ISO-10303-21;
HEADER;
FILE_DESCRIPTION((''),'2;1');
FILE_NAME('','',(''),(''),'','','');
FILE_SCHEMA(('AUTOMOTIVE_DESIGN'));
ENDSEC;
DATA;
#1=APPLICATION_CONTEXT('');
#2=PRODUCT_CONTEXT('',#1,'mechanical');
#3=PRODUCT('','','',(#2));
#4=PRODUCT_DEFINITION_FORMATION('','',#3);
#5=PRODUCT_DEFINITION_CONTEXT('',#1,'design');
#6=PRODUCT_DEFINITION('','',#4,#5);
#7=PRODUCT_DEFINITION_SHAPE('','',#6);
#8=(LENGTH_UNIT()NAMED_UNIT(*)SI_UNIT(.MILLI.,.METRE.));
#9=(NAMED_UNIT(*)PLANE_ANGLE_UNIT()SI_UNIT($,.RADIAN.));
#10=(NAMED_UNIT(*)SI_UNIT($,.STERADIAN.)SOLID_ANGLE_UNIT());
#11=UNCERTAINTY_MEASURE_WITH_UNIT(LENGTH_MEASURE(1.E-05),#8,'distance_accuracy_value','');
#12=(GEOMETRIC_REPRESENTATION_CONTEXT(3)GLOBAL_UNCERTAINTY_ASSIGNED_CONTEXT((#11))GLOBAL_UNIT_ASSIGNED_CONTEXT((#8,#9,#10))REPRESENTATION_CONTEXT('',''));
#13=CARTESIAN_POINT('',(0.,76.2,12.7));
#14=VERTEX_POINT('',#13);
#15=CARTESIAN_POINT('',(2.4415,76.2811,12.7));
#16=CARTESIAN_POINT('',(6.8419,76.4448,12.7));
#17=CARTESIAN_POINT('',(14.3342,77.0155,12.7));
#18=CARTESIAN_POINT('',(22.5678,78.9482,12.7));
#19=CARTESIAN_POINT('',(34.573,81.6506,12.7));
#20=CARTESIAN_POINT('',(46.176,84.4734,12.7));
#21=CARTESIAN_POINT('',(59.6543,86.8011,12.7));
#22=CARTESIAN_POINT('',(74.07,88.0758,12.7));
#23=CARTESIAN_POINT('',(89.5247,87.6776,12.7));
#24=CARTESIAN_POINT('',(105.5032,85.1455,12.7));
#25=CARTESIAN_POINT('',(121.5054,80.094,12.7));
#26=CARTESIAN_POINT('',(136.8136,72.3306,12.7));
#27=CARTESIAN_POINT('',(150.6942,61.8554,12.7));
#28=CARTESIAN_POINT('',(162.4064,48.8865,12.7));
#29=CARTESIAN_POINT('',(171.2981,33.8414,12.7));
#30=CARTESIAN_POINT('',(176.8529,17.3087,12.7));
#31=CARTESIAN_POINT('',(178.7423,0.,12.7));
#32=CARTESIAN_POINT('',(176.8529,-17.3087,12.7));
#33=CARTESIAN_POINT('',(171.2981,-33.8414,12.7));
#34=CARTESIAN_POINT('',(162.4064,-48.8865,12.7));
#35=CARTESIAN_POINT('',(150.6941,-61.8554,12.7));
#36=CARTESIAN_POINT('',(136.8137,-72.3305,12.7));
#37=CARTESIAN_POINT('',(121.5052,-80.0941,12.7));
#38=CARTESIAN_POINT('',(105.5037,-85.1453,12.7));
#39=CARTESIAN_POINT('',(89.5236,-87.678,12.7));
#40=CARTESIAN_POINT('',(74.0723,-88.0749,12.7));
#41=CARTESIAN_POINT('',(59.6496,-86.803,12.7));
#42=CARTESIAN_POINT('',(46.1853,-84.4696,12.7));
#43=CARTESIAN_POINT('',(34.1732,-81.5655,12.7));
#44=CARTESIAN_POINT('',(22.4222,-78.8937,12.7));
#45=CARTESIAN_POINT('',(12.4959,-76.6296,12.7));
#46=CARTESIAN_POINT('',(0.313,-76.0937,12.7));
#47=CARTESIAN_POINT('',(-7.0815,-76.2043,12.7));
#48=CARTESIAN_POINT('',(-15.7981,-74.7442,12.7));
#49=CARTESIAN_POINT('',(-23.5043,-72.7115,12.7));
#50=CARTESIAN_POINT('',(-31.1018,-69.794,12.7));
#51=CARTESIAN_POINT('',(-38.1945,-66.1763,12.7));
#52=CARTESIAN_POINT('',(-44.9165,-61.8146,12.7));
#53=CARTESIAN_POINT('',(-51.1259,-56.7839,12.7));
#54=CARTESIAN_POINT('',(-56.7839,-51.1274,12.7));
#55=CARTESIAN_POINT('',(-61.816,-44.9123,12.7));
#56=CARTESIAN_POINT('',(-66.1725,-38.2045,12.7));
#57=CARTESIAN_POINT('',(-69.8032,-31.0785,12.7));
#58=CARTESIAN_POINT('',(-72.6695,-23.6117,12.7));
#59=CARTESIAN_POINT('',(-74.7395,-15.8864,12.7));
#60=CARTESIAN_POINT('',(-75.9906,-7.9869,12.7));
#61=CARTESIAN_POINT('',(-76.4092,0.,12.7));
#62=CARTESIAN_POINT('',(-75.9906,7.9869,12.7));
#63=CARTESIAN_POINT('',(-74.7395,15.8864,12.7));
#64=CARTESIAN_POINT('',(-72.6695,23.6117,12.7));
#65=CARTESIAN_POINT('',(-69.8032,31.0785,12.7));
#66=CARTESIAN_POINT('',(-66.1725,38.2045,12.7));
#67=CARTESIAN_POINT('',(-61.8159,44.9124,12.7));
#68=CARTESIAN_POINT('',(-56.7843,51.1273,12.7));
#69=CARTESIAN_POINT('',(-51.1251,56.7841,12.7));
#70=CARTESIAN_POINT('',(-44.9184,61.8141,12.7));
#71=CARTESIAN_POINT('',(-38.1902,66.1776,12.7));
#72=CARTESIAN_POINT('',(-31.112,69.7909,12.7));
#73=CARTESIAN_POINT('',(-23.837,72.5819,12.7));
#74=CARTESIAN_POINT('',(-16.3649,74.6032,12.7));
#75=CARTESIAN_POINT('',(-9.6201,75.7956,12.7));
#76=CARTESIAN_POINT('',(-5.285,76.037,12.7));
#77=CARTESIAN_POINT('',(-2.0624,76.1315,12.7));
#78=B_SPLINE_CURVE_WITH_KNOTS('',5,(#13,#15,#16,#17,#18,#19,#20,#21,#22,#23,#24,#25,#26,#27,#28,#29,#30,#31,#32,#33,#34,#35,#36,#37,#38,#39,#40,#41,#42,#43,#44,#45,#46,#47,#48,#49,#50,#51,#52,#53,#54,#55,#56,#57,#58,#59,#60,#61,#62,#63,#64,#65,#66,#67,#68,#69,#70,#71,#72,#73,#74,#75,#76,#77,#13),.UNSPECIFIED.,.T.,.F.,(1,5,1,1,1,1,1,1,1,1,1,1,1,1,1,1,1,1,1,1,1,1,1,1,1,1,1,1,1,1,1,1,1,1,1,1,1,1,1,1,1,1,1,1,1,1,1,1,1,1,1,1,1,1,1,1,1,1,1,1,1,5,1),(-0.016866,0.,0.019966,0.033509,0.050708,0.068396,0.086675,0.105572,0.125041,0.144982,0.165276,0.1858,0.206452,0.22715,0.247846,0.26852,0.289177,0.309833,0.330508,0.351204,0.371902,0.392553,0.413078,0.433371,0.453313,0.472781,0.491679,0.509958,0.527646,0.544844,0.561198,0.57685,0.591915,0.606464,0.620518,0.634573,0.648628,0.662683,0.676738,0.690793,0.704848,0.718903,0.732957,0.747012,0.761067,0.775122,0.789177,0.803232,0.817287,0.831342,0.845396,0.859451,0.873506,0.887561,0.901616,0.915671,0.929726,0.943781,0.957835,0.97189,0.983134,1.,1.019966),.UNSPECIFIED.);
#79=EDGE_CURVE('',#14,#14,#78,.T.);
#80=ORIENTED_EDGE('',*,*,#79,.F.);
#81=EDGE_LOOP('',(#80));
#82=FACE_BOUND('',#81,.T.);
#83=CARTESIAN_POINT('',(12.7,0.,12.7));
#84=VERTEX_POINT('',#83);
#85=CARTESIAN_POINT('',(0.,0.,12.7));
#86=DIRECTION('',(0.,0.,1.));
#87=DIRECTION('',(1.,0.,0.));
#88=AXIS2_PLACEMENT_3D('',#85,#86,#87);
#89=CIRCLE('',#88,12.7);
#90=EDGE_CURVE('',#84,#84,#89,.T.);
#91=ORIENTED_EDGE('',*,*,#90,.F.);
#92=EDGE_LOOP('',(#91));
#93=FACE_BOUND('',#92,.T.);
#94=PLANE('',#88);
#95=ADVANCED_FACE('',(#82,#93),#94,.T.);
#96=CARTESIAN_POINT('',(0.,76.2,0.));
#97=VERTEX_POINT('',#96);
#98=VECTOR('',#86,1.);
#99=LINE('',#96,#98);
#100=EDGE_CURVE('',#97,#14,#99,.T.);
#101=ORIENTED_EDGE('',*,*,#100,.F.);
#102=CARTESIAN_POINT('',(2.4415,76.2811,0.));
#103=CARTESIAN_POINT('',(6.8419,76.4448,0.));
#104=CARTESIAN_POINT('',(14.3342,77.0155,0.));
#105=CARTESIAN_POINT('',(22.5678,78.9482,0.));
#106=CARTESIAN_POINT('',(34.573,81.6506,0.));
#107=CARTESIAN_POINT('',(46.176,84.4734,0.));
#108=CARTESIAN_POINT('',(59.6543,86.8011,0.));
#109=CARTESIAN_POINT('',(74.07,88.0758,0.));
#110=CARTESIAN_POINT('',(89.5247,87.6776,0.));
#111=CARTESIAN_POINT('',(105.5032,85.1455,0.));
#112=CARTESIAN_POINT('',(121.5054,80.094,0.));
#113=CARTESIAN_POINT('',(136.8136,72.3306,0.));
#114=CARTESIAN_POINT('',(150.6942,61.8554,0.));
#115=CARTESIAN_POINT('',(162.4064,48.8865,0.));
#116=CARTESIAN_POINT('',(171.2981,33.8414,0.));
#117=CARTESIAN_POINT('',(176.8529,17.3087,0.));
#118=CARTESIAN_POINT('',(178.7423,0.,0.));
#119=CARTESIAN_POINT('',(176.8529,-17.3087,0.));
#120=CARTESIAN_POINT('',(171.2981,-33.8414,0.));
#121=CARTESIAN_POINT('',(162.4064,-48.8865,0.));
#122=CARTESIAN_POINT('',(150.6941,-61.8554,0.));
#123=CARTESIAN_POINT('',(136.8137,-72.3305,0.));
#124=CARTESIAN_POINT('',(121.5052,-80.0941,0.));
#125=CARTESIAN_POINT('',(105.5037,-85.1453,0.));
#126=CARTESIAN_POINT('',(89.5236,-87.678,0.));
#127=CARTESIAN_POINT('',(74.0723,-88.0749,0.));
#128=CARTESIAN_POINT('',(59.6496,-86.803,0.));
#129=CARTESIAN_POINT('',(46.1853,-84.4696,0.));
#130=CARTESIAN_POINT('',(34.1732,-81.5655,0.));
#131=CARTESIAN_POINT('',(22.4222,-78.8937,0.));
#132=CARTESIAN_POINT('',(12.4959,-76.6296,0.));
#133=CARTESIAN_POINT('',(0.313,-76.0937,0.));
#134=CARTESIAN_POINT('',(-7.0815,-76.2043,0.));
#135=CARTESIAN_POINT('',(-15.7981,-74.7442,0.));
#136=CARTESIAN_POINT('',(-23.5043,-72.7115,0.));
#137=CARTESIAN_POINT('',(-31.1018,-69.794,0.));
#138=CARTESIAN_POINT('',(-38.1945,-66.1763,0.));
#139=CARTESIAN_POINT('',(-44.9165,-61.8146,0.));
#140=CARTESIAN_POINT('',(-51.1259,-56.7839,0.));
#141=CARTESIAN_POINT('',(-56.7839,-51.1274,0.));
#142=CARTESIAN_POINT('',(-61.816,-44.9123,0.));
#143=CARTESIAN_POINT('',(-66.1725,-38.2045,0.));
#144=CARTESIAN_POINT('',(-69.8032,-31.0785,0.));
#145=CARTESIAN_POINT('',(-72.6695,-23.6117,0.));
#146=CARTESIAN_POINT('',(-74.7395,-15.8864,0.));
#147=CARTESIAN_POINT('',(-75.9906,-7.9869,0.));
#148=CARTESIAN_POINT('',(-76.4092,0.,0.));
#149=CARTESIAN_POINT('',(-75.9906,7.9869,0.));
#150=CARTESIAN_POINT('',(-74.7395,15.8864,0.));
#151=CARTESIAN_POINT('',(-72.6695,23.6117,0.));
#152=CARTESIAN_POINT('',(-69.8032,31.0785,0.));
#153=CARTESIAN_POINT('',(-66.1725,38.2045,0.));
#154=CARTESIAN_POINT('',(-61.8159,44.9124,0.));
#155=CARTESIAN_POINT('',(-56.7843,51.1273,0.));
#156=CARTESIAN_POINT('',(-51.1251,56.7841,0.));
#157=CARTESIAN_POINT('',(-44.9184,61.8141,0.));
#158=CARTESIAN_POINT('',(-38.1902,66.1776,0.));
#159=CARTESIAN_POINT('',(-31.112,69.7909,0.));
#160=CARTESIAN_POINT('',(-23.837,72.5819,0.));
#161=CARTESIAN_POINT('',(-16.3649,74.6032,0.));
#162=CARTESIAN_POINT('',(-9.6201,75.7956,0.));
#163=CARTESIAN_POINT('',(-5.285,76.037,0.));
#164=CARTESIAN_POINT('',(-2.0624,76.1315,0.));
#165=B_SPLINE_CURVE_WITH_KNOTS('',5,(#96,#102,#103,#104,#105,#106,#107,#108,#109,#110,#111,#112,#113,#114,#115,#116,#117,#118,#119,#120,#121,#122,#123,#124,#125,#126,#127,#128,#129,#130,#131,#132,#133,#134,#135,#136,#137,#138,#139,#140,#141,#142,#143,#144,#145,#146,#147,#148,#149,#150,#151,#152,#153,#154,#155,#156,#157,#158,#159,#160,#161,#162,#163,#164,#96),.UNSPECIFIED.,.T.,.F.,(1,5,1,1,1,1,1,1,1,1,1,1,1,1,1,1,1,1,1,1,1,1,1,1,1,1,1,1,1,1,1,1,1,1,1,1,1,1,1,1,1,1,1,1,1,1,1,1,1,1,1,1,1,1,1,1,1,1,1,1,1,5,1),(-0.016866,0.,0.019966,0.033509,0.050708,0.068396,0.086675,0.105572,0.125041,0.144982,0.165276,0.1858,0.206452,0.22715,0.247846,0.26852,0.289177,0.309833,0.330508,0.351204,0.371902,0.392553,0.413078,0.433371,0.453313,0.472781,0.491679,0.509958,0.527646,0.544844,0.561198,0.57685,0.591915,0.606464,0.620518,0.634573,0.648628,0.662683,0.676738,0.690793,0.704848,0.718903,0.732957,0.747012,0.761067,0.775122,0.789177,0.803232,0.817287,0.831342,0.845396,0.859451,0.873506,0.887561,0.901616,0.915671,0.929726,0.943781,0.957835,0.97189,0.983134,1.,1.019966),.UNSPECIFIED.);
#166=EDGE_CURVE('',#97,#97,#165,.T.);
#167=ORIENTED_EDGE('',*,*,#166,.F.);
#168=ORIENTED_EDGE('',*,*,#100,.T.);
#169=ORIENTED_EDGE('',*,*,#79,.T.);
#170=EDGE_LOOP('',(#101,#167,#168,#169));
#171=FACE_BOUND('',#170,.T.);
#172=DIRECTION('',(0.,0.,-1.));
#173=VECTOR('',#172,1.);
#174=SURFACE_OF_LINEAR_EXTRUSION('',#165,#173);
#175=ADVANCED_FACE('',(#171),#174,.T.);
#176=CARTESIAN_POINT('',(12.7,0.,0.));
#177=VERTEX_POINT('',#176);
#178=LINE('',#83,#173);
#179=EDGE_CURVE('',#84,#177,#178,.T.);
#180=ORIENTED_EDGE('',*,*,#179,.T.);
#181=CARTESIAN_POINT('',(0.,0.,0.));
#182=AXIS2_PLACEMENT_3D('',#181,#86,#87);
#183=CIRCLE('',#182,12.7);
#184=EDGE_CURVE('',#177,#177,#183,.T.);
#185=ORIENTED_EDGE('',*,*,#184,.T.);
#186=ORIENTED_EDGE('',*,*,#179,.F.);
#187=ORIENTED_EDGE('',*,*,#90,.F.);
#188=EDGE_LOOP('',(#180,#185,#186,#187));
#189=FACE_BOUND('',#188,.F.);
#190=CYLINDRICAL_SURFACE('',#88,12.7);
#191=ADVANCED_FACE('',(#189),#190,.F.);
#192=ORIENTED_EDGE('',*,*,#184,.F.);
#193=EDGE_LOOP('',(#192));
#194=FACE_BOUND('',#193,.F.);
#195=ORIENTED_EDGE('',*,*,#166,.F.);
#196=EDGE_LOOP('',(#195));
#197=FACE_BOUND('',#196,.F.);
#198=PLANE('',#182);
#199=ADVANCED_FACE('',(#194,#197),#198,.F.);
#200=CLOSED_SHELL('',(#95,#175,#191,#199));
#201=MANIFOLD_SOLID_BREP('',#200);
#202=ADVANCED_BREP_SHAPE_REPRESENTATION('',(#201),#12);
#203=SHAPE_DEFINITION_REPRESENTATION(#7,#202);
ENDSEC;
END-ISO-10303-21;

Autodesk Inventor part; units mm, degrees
ref_plane "YZ Plane" through (0, 0, 0) normal (1, 0, 0) x (0, 1, 0)
ref_plane "XZ Plane" through (0, 0, 0) normal (0, 1, 0) x (-1, 0, 0)
ref_plane "XY Plane" through (0, 0, 0) normal (0, 0, 1) x (1, 0, 0)
sketch "Main Sketch" plane through (0, 0, 0) normal (0, 0, 1) x (1, 0, 0)
  spline S0 degree 5 poles (0, 76.2) (2.4415, 76.2811) (6.8419, 76.4448) (14.3342, 77.0155) (22.5678, 78.9482) (34.573, 81.6506) (46.176, 84.4734) (59.6543, 86.8011) (74.07, 88.0758) (89.5247, 87.6776) (105.5032, 85.1455) (121.5054, 80.094) (136.8136, 72.3306) (150.6942, 61.8554) (162.4064, 48.8865) (171.2981, 33.8414) (176.8529, 17.3087) (178.7423, 0) (176.8529, -17.3087) (171.2981, -33.8414) (162.4064, -48.8865) (150.6941, -61.8554) (136.8137, -72.3305) (121.5052, -80.0941) (105.5037, -85.1453) (89.5236, -87.678) (74.0723, -88.0749) (59.6496, -86.803) (46.1853, -84.4696) (34.1732, -81.5655) (22.4222, -78.8937) (12.4959, -76.6296) (0.313, -76.0937) (-7.0815, -76.2043) (-15.7981, -74.7442) (-23.5043, -72.7115) (-31.1018, -69.794) (-38.1945, -66.1763) (-44.9165, -61.8146) (-51.1259, -56.7839) (-56.7839, -51.1274) (-61.816, -44.9123) (-66.1725, -38.2045) (-69.8032, -31.0785) (-72.6695, -23.6117) (-74.7395, -15.8864) (-75.9906, -7.9869) (-76.4092, 0) (-75.9906, 7.9869) (-74.7395, 15.8864) (-72.6695, 23.6117) (-69.8032, 31.0785) (-66.1725, 38.2045) (-61.8159, 44.9124) (-56.7843, 51.1273) (-51.1251, 56.7841) (-44.9184, 61.8141) (-38.1902, 66.1776) (-31.112, 69.7909) (-23.837, 72.5819) (-16.3649, 74.6032) (-9.6201, 75.7956) (-5.285, 76.037) (-2.0624, 76.1315) (0, 76.2) knots 0 0 0 0 0 0 0.019966 0.033509 0.050708 0.068396 0.086675 0.105572 0.125041 0.144982 0.165276 0.1858 0.206452 0.22715 0.247846 0.26852 0.289177 0.309833 0.330508 0.351204 0.371902 0.392553 0.413078 0.433371 0.453313 0.472781 0.491679 0.509958 0.527646 0.544844 0.561198 0.57685 0.591915 0.606464 0.620518 0.634573 0.648628 0.662683 0.676738 0.690793 0.704848 0.718903 0.732957 0.747012 0.761067 0.775122 0.789177 0.803232 0.817287 0.831342 0.845396 0.859451 0.873506 0.887561 0.901616 0.915671 0.929726 0.943781 0.957835 0.97189 0.983134 1 1 1 1 1 1
  point P0 (22.0134, 78.8258)
  point P1 (33.3701, 81.4116)
  point P2 (45.5354, 84.1258)
  point P3 (58.8273, 86.3979)
  point P4 (73.3136, 87.6269)
  point P5 (88.8039, 87.2207)
  point P6 (104.8783, 84.6627)
  point P7 (120.9362, 79.576)
  point P8 (136.2611, 71.7733)
  point P9 (150.0945, 61.2842)
  point P10 (161.7111, 48.3549)
  point P11 (170.4865, 33.4236)
  point P12 (175.947, 17.0772)
  point P13 (177.8, 0)
  point P14 (175.947, -17.0772)
  point P15 (170.4865, -33.4236)
  point P16 (161.7111, -48.3549)
  point P17 (150.0945, -61.2842)
  point P18 (136.2611, -71.7733)
  point P19 (120.9362, -79.576)
  point P20 (104.8783, -84.6627)
  point P21 (88.8039, -87.2207)
  point P22 (73.3136, -87.6269)
  point P23 (58.8273, -86.3979)
  point P24 (45.5354, -84.1258)
  point P25 (33.3701, -81.4116)
  point P26 (22.0134, -78.8258)
  point P27 (11.002, -76.9174)
  point P28 (0, -76.2)
  point P29 (-7.9651, -75.7826)
  point P30 (-15.8429, -74.5348)
  point P31 (-23.5471, -72.4705)
  point P32 (-30.9933, -69.6122)
  point P33 (-38.1, -65.9911)
  point P34 (-44.7892, -61.6471)
  point P35 (-50.9878, -56.6276)
  point P36 (-56.6276, -50.9878)
  point P37 (-61.6471, -44.7892)
  point P38 (-65.9911, -38.1)
  point P39 (-69.6122, -30.9933)
  point P40 (-72.4705, -23.5471)
  point P41 (-74.5348, -15.8429)
  point P42 (-75.7826, -7.9651)
  point P43 (-76.2, 0)
  point P44 (-75.7826, 7.9651)
  point P45 (-74.5348, 15.8429)
  point P46 (-72.4705, 23.5471)
  point P47 (-69.6122, 30.9933)
  point P48 (-65.9911, 38.1)
  point P49 (-61.6471, 44.7892)
  point P50 (-56.6276, 50.9878)
  point P51 (-50.9878, 56.6276)
  point P52 (-44.7892, 61.6471)
  point P53 (-38.1, 65.9911)
  point P54 (-30.9933, 69.6122)
  point P55 (-23.5471, 72.4705)
  point P56 (-15.8429, 74.5348)
  point P57 (-7.9651, 75.7826)
extrude "Cam" add sketch "Main Sketch" along normal blind 12.7
sketch "Sketch2" plane through (0, 0, 12.7) normal (0, 0, 1) x (1, 0, 0)
  circle A0 centre (0, 0) radius 12.7
  dimension "d4" = 25.4
extrude "Extrusion2" cut sketch "Sketch2" against normal through all
properties part number "Disc Cam" material "Stainless Steel, Austenitic"
